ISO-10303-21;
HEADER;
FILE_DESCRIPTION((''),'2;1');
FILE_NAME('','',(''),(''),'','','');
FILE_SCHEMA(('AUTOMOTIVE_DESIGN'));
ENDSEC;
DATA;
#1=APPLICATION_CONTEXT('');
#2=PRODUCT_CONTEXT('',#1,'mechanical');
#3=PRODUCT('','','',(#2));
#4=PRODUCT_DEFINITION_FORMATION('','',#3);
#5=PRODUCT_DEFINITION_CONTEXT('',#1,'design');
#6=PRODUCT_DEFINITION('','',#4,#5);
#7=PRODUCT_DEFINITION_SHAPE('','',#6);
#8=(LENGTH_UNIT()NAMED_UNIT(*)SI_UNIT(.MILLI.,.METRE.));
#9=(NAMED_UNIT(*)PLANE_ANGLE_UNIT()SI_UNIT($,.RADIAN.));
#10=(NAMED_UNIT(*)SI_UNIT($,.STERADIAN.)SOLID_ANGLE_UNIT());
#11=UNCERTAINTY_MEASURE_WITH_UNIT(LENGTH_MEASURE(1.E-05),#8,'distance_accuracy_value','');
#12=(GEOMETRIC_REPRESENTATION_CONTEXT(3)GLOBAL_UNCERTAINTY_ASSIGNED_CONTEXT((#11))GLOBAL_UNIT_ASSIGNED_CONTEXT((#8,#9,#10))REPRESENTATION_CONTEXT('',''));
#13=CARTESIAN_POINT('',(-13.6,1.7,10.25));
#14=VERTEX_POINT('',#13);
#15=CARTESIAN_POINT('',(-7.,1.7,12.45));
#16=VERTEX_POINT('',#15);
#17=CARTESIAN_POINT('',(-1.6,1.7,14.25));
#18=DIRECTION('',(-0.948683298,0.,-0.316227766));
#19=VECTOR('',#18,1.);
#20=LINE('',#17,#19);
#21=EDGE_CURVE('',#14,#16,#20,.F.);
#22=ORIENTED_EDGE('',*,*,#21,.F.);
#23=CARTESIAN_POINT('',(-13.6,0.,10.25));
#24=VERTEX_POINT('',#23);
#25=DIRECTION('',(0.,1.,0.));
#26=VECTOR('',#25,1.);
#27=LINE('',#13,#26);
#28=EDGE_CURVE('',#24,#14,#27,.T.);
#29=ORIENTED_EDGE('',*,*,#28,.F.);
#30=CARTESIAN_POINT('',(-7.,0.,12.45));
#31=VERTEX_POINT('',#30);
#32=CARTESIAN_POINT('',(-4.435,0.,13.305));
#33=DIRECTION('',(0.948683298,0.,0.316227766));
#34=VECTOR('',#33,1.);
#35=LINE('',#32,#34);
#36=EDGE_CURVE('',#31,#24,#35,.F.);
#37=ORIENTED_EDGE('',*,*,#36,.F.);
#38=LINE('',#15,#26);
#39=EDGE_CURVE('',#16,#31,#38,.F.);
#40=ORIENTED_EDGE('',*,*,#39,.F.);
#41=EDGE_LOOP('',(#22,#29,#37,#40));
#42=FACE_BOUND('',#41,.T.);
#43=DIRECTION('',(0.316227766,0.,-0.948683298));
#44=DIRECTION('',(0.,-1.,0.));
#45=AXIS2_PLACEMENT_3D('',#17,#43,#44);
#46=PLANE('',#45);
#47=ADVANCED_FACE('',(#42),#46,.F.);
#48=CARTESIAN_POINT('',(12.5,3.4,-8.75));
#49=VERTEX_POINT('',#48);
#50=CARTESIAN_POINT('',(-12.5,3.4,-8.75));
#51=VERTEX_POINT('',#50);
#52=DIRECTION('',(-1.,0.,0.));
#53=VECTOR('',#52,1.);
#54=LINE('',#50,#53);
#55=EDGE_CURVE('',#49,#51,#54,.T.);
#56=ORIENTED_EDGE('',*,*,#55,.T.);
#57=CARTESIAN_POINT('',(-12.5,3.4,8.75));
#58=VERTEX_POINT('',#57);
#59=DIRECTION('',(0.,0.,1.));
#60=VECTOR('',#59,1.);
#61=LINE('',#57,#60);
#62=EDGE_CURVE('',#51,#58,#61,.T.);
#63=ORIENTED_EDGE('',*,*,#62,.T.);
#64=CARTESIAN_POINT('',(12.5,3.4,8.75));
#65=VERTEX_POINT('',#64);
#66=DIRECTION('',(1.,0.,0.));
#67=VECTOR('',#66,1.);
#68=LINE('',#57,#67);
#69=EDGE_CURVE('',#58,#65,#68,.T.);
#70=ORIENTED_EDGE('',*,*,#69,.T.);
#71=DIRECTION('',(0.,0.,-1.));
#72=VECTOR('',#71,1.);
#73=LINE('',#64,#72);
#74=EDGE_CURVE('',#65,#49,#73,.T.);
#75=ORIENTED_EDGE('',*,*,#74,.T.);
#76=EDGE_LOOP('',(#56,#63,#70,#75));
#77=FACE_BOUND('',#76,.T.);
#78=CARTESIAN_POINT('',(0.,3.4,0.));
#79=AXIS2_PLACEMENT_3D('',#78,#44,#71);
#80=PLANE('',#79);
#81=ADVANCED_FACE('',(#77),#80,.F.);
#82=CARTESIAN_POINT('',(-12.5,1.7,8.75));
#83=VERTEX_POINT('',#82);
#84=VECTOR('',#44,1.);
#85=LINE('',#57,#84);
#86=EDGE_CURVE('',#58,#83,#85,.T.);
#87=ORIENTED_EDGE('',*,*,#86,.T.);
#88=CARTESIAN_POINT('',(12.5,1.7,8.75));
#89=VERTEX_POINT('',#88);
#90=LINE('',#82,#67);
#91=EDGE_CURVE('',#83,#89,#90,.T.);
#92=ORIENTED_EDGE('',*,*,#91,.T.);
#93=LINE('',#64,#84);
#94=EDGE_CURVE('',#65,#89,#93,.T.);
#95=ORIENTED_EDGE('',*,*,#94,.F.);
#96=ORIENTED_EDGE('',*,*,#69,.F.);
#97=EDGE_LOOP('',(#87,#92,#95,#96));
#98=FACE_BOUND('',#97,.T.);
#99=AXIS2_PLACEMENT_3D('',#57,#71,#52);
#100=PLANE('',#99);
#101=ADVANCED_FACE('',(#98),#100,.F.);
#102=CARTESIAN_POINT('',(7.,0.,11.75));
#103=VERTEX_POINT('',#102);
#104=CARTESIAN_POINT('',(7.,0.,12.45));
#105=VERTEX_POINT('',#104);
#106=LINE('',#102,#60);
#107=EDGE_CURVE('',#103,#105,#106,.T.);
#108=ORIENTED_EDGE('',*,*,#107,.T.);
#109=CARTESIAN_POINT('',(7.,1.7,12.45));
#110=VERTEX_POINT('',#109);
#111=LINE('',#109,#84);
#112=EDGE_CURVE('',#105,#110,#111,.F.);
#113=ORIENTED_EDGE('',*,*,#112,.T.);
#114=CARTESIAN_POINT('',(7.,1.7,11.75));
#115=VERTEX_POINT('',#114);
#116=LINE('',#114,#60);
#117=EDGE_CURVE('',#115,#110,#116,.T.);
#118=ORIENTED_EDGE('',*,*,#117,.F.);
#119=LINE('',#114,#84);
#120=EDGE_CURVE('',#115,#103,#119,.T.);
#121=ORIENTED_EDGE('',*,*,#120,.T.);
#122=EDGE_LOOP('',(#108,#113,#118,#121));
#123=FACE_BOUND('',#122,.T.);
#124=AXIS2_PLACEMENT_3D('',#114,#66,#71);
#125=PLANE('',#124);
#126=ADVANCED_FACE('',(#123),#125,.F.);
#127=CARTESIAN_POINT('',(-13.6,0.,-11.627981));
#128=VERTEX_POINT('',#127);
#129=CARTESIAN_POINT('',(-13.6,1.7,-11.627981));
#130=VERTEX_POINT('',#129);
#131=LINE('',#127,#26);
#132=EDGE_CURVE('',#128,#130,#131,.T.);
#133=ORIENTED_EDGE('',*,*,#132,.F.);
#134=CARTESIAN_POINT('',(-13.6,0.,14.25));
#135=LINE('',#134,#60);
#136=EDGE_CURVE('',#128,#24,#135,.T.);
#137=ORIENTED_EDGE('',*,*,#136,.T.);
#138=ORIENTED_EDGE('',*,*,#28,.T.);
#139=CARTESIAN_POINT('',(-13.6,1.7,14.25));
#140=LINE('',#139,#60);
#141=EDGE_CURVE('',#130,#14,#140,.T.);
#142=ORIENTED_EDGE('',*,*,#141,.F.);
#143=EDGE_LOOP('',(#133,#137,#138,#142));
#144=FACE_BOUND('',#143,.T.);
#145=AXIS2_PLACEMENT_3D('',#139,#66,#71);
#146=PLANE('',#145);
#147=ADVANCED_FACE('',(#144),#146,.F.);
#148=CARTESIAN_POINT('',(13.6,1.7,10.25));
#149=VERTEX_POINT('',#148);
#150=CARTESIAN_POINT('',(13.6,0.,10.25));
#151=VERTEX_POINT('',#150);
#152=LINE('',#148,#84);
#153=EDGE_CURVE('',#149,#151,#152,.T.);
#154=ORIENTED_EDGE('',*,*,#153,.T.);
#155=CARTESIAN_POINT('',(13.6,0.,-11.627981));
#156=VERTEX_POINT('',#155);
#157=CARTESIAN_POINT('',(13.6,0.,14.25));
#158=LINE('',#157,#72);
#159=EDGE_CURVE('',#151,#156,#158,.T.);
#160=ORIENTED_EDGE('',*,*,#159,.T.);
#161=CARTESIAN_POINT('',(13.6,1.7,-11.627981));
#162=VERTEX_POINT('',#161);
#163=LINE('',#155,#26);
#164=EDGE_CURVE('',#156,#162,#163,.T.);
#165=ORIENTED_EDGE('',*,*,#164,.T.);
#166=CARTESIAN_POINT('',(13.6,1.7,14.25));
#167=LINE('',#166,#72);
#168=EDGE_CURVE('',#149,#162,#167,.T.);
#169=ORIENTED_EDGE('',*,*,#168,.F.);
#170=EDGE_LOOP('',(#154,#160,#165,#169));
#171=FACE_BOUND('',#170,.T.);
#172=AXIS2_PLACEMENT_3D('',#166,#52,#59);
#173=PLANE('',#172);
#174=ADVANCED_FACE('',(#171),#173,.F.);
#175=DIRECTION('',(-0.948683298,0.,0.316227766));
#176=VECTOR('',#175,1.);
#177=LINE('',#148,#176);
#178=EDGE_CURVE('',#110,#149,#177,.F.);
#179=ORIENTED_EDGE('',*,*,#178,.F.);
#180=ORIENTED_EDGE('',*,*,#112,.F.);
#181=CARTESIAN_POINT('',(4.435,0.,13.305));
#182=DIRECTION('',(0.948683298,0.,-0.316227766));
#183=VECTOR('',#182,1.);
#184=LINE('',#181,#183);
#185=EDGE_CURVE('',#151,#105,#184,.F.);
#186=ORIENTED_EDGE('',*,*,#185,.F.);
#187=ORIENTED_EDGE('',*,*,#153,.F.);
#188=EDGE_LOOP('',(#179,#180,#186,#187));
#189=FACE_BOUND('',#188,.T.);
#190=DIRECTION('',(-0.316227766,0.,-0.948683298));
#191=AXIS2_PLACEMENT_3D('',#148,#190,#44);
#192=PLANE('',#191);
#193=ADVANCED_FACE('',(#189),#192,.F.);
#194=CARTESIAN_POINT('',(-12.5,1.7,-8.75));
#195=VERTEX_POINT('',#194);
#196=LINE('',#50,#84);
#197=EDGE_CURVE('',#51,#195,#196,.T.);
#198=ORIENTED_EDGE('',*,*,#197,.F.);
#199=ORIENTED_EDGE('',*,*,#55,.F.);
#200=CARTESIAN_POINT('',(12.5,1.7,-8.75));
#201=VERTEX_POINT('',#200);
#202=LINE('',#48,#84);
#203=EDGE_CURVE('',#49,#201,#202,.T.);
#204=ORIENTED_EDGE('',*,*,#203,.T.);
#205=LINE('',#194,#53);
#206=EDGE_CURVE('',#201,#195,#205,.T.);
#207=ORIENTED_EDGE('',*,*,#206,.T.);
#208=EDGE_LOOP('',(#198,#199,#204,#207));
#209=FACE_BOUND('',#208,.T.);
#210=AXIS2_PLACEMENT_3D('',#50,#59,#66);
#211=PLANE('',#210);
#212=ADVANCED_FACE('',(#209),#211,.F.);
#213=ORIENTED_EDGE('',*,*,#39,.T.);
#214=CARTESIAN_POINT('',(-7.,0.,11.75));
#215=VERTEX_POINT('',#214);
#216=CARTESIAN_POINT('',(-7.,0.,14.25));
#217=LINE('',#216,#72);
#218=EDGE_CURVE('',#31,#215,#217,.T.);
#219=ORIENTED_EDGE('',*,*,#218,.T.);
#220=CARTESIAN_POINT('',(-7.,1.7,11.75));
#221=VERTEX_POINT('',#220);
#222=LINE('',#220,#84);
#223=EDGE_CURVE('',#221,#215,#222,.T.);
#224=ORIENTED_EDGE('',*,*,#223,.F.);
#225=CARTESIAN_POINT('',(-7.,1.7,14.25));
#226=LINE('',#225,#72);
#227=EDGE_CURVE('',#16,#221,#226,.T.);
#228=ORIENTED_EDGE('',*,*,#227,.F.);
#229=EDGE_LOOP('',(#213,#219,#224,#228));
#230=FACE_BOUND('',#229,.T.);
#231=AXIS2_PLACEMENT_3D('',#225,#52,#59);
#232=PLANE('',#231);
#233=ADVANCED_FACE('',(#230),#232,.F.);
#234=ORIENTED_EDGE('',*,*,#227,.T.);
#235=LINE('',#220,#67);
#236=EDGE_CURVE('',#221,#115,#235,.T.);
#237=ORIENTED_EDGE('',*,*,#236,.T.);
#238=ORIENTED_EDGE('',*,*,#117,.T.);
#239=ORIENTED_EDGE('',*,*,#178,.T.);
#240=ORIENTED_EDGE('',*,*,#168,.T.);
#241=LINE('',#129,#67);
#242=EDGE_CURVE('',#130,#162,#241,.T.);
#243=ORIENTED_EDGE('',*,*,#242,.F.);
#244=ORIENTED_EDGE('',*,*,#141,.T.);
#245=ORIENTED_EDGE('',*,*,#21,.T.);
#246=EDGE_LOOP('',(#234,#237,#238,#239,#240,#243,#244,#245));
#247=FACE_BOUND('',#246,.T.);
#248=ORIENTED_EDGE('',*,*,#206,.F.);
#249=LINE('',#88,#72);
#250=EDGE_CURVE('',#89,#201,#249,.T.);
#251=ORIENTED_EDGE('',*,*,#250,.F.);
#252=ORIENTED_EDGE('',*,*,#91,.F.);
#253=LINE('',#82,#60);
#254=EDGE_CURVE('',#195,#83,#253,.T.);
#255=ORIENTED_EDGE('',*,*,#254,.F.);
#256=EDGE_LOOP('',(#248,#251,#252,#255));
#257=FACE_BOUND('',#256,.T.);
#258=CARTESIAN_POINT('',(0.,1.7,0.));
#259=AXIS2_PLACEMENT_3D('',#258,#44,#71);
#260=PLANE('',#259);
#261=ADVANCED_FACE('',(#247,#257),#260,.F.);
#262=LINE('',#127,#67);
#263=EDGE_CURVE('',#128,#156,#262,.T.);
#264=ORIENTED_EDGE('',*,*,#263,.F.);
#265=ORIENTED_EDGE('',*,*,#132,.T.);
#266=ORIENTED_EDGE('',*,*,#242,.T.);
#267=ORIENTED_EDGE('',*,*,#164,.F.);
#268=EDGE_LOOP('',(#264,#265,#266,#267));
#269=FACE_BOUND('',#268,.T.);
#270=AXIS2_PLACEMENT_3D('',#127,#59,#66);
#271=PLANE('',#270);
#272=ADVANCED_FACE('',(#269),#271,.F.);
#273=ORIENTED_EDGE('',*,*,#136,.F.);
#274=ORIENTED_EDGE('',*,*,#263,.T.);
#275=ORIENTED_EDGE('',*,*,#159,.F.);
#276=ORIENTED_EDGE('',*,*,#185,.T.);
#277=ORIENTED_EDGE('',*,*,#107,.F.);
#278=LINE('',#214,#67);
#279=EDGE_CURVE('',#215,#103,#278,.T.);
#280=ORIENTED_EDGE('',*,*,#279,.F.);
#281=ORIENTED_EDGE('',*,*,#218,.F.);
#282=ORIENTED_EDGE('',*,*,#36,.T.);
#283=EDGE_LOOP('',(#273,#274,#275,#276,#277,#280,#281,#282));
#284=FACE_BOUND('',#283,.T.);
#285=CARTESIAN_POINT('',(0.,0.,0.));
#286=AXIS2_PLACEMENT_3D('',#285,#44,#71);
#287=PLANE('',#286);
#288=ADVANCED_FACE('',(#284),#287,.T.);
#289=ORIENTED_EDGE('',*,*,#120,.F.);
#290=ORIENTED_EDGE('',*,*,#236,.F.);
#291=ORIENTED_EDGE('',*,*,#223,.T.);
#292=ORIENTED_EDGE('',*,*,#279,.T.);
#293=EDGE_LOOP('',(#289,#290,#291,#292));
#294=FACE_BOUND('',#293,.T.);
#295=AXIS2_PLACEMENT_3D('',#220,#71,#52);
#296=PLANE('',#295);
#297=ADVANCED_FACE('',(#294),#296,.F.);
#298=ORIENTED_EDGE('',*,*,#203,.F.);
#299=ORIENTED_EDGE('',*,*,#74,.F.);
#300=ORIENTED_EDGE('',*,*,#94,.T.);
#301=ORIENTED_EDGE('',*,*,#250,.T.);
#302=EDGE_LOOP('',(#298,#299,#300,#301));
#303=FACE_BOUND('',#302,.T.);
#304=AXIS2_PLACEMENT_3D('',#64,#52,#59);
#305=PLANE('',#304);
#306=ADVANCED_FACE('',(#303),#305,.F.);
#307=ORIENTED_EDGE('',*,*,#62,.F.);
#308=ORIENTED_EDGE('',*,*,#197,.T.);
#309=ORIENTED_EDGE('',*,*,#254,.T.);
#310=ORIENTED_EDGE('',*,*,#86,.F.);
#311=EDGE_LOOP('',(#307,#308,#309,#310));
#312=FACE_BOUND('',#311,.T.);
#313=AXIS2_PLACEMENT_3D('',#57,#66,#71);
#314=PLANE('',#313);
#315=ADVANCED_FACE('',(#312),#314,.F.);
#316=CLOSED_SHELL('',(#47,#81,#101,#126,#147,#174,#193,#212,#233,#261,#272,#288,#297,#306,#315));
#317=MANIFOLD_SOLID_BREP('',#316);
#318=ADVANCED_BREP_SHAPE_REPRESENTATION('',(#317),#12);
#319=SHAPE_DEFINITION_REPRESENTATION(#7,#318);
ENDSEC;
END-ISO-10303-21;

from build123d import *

# Parameters (mm, degrees)
BOSS_EXTRUDE1_DEPTH = 1.7
SKETCH2_W           = 25
SKETCH2_H           = 17.5
BOSS_EXTRUDE2_DEPTH = 1.7
CHAMFER1_SIZE       = 12
CHAMFER1_SIZE_2     = 4
CHAMFER2_SIZE       = 4
CHAMFER2_SIZE_2     = 12
SKETCH3_W           = 27.2
SKETCH3_H           = 2.622019417
CUT_EXTRUDE1_DEPTH  = 20.771507277


with BuildPart() as part:
    # Sketch1 → Boss-Extrude1 (new body)
    with BuildSketch(Plane(origin=(0, 0, 0), x_dir=(1, 0, 0), z_dir=(0, 1, 0))):
        Polygon((-13.6, -14.25), (-7, -14.25), (-7, -11.75), (7, -11.75), (7, -14.25), (13.6, -14.25), (13.6, 14.25), (-13.6, 14.25), align=None)
    extrude(amount=BOSS_EXTRUDE1_DEPTH)

    # Sketch2 → Boss-Extrude2 (add)
    with BuildSketch(Plane(origin=(0, 1.7, 0), x_dir=(1, 0, 0), z_dir=(0, 1, 0))):
        Rectangle(SKETCH2_W, SKETCH2_H)
    extrude(amount=BOSS_EXTRUDE2_DEPTH)

    # Chamfer1
    # the kernel refuses this chamfer: 12, 4 mm, written as the material it takes off along each edge
    with BuildSketch(Plane(origin=(-13.6, -31.140732128, 14.25), x_dir=(0.9999257509361694, 0, 0.012185754582199854), z_dir=(0, 1, 0))) as chamfer1_piece_1:
        Polygon((CHAMFER1_SIZE * 0.999925750936, CHAMFER1_SIZE * 0.0121857545822), (-CHAMFER1_SIZE_2 * 0.0121857545822, CHAMFER1_SIZE_2 * 0.999925750936), (0, 0), align=None)
    extrude(amount=63.981464256, mode=Mode.SUBTRACT)

    # Chamfer2
    # the kernel refuses this chamfer: 12, 4 mm, written as the material it takes off along each edge
    with BuildSketch(Plane(origin=(13.6, -31.140732128, 14.25), x_dir=(0.10902612017980688, 0, -0.9940388851139268), z_dir=(0, 1, 0))) as chamfer2_piece_1:
        Polygon((CHAMFER2_SIZE * 0.994038885114, CHAMFER2_SIZE * 0.10902612018), (-CHAMFER2_SIZE_2 * 0.10902612018, CHAMFER2_SIZE_2 * 0.994038885114), (0, 0), align=None)
    extrude(amount=63.981464256, mode=Mode.SUBTRACT)

    # Sketch3 → Cut-Extrude1 (cut, through all)
    with BuildSketch(Plane(origin=(0, 1.7, 0), x_dir=(1, 0, 0), z_dir=(0, 1, 0))):
        with Locations((0, 12.938990292)):
            Rectangle(SKETCH3_W, SKETCH3_H)
    extrude(amount=-CUT_EXTRUDE1_DEPTH, mode=Mode.SUBTRACT)


solid = part.part
